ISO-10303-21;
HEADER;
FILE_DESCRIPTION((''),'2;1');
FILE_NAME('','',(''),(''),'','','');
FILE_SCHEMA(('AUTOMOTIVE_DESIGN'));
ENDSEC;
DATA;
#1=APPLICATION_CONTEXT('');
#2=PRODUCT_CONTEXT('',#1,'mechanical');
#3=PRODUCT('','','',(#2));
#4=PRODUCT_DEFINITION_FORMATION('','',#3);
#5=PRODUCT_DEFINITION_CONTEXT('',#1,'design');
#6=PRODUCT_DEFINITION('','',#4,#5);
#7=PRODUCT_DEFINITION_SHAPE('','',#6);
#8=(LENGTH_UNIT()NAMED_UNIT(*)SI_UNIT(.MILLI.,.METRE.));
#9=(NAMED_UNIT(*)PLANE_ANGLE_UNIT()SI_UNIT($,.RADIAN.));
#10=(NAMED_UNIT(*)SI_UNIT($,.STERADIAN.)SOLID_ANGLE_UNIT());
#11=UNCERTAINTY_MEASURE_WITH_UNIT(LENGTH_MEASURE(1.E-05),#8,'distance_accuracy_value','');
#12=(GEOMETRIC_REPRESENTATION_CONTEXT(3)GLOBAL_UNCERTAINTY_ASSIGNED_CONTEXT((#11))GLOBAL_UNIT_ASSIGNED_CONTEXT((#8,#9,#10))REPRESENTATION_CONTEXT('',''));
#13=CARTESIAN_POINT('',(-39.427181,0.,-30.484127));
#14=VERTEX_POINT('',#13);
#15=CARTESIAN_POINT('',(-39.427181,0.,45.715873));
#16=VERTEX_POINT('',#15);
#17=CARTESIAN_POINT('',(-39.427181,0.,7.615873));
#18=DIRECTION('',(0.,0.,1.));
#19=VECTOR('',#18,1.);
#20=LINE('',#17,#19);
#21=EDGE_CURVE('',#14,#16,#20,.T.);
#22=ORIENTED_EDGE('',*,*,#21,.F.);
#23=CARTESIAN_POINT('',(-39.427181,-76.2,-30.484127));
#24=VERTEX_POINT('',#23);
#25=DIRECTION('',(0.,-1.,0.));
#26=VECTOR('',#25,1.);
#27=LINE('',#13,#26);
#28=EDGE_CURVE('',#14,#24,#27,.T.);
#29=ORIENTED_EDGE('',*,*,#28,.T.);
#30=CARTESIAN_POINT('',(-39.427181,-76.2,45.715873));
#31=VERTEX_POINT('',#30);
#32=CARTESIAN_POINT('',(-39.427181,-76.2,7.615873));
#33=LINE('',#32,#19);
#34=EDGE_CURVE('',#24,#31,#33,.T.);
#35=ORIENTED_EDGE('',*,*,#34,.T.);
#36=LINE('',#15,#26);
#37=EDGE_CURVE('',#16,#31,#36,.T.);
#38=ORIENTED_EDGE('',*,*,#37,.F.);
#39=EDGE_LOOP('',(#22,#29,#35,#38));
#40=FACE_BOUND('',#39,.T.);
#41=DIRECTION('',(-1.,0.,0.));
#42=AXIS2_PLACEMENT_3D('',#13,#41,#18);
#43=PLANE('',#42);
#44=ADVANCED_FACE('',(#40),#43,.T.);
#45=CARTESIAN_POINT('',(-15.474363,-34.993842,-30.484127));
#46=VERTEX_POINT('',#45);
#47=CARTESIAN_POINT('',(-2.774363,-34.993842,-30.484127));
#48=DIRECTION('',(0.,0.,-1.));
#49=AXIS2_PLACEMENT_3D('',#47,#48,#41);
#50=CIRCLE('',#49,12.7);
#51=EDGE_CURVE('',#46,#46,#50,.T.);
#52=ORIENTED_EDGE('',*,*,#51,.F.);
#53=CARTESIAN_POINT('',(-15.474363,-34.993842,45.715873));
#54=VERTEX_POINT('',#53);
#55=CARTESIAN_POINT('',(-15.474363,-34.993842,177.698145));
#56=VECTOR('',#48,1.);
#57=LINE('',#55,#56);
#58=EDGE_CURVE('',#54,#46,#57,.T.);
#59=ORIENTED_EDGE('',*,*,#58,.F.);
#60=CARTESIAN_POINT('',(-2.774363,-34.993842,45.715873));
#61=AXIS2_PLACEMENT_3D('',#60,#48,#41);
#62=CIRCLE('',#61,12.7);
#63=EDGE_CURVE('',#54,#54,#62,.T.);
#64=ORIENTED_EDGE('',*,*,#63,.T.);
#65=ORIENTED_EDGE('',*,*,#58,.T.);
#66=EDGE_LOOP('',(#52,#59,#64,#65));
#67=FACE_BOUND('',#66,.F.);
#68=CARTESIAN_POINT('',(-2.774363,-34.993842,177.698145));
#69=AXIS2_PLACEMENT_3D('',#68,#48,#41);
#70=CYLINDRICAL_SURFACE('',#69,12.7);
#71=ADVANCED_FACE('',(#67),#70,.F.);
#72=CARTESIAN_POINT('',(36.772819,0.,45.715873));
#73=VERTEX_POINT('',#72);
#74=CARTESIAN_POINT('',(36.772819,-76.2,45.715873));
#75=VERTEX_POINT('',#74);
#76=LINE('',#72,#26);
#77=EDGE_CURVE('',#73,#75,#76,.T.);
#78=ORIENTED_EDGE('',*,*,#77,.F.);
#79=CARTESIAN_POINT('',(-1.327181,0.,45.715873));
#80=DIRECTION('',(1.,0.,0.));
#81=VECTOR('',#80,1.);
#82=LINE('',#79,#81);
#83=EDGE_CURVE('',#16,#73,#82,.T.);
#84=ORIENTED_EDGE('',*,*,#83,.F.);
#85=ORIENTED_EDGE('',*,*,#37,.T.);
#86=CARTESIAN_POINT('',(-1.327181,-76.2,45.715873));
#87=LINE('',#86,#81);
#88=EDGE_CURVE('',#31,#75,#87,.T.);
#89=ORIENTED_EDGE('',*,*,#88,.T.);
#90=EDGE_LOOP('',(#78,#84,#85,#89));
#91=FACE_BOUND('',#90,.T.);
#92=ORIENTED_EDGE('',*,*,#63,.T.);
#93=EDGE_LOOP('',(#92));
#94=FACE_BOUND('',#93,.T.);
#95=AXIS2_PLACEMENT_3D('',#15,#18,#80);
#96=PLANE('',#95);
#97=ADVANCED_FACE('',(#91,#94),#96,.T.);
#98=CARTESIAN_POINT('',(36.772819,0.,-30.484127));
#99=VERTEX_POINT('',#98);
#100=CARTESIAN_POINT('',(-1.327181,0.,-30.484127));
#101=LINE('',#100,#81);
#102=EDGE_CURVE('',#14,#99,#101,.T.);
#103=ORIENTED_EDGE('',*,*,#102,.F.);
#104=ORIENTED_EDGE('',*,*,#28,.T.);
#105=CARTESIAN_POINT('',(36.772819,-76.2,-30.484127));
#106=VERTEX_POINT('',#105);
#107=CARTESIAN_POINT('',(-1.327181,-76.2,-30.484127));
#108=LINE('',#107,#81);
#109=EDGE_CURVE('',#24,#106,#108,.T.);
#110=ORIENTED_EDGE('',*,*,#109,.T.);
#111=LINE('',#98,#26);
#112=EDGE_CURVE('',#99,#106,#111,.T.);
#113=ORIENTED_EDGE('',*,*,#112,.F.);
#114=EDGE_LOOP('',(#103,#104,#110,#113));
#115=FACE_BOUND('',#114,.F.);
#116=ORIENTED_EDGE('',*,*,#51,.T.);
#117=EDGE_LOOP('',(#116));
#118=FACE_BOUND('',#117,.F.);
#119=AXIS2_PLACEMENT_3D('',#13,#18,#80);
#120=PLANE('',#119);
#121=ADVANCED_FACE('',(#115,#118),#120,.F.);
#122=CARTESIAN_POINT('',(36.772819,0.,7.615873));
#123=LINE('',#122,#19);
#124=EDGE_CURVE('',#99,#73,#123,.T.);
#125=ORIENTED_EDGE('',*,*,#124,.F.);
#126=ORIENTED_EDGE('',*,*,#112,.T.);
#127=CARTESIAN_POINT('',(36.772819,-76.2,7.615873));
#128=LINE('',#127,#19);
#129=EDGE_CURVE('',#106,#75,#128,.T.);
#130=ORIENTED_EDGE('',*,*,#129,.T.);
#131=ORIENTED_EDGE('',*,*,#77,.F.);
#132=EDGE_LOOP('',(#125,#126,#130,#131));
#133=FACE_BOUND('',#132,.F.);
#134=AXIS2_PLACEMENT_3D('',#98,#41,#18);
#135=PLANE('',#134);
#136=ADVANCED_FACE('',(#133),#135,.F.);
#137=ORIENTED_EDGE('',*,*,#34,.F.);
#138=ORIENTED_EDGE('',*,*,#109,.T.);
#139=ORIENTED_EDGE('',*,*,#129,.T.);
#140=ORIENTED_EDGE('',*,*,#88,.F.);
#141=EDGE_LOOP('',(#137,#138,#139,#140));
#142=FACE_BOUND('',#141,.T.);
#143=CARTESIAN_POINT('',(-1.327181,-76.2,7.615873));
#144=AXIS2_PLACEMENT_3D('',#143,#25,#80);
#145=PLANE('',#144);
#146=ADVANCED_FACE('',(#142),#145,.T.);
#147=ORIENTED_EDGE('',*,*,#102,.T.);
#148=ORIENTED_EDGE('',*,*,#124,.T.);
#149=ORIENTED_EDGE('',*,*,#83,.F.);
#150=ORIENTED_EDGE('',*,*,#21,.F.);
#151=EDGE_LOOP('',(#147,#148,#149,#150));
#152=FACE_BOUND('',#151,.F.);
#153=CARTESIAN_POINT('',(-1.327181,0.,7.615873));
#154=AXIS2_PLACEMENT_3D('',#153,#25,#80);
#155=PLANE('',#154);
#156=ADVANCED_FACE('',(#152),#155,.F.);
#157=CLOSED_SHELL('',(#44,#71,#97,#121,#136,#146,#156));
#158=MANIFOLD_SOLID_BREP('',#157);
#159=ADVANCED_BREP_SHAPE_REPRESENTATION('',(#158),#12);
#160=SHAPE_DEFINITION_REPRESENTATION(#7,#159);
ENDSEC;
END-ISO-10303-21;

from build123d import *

# Parameters (mm, degrees)
F0_W     = 76.2
F0_H     = 76.2
F1_DEPTH = 76.2
F7_D     = 25.4


# Not quite as in the source:
# - the program builds the solid bodies; features that only make, move or delete a surface that nothing else refers to are left out


with BuildPart() as f1:
    # F0 (on Front) → F1 (new body)
    with BuildSketch(Plane.XZ):
        with Locations((-1.327181235, 7.6158734726)):
            Rectangle(F0_W, F0_H)
    extrude(amount=F1_DEPTH)

    # F7 (through all)
    with Locations(Plane.XY.offset(45.7158734726)):
        with Locations((-2.7743626852, -34.9938422441)):
            Hole(F7_D / 2)


solid = f1.part
